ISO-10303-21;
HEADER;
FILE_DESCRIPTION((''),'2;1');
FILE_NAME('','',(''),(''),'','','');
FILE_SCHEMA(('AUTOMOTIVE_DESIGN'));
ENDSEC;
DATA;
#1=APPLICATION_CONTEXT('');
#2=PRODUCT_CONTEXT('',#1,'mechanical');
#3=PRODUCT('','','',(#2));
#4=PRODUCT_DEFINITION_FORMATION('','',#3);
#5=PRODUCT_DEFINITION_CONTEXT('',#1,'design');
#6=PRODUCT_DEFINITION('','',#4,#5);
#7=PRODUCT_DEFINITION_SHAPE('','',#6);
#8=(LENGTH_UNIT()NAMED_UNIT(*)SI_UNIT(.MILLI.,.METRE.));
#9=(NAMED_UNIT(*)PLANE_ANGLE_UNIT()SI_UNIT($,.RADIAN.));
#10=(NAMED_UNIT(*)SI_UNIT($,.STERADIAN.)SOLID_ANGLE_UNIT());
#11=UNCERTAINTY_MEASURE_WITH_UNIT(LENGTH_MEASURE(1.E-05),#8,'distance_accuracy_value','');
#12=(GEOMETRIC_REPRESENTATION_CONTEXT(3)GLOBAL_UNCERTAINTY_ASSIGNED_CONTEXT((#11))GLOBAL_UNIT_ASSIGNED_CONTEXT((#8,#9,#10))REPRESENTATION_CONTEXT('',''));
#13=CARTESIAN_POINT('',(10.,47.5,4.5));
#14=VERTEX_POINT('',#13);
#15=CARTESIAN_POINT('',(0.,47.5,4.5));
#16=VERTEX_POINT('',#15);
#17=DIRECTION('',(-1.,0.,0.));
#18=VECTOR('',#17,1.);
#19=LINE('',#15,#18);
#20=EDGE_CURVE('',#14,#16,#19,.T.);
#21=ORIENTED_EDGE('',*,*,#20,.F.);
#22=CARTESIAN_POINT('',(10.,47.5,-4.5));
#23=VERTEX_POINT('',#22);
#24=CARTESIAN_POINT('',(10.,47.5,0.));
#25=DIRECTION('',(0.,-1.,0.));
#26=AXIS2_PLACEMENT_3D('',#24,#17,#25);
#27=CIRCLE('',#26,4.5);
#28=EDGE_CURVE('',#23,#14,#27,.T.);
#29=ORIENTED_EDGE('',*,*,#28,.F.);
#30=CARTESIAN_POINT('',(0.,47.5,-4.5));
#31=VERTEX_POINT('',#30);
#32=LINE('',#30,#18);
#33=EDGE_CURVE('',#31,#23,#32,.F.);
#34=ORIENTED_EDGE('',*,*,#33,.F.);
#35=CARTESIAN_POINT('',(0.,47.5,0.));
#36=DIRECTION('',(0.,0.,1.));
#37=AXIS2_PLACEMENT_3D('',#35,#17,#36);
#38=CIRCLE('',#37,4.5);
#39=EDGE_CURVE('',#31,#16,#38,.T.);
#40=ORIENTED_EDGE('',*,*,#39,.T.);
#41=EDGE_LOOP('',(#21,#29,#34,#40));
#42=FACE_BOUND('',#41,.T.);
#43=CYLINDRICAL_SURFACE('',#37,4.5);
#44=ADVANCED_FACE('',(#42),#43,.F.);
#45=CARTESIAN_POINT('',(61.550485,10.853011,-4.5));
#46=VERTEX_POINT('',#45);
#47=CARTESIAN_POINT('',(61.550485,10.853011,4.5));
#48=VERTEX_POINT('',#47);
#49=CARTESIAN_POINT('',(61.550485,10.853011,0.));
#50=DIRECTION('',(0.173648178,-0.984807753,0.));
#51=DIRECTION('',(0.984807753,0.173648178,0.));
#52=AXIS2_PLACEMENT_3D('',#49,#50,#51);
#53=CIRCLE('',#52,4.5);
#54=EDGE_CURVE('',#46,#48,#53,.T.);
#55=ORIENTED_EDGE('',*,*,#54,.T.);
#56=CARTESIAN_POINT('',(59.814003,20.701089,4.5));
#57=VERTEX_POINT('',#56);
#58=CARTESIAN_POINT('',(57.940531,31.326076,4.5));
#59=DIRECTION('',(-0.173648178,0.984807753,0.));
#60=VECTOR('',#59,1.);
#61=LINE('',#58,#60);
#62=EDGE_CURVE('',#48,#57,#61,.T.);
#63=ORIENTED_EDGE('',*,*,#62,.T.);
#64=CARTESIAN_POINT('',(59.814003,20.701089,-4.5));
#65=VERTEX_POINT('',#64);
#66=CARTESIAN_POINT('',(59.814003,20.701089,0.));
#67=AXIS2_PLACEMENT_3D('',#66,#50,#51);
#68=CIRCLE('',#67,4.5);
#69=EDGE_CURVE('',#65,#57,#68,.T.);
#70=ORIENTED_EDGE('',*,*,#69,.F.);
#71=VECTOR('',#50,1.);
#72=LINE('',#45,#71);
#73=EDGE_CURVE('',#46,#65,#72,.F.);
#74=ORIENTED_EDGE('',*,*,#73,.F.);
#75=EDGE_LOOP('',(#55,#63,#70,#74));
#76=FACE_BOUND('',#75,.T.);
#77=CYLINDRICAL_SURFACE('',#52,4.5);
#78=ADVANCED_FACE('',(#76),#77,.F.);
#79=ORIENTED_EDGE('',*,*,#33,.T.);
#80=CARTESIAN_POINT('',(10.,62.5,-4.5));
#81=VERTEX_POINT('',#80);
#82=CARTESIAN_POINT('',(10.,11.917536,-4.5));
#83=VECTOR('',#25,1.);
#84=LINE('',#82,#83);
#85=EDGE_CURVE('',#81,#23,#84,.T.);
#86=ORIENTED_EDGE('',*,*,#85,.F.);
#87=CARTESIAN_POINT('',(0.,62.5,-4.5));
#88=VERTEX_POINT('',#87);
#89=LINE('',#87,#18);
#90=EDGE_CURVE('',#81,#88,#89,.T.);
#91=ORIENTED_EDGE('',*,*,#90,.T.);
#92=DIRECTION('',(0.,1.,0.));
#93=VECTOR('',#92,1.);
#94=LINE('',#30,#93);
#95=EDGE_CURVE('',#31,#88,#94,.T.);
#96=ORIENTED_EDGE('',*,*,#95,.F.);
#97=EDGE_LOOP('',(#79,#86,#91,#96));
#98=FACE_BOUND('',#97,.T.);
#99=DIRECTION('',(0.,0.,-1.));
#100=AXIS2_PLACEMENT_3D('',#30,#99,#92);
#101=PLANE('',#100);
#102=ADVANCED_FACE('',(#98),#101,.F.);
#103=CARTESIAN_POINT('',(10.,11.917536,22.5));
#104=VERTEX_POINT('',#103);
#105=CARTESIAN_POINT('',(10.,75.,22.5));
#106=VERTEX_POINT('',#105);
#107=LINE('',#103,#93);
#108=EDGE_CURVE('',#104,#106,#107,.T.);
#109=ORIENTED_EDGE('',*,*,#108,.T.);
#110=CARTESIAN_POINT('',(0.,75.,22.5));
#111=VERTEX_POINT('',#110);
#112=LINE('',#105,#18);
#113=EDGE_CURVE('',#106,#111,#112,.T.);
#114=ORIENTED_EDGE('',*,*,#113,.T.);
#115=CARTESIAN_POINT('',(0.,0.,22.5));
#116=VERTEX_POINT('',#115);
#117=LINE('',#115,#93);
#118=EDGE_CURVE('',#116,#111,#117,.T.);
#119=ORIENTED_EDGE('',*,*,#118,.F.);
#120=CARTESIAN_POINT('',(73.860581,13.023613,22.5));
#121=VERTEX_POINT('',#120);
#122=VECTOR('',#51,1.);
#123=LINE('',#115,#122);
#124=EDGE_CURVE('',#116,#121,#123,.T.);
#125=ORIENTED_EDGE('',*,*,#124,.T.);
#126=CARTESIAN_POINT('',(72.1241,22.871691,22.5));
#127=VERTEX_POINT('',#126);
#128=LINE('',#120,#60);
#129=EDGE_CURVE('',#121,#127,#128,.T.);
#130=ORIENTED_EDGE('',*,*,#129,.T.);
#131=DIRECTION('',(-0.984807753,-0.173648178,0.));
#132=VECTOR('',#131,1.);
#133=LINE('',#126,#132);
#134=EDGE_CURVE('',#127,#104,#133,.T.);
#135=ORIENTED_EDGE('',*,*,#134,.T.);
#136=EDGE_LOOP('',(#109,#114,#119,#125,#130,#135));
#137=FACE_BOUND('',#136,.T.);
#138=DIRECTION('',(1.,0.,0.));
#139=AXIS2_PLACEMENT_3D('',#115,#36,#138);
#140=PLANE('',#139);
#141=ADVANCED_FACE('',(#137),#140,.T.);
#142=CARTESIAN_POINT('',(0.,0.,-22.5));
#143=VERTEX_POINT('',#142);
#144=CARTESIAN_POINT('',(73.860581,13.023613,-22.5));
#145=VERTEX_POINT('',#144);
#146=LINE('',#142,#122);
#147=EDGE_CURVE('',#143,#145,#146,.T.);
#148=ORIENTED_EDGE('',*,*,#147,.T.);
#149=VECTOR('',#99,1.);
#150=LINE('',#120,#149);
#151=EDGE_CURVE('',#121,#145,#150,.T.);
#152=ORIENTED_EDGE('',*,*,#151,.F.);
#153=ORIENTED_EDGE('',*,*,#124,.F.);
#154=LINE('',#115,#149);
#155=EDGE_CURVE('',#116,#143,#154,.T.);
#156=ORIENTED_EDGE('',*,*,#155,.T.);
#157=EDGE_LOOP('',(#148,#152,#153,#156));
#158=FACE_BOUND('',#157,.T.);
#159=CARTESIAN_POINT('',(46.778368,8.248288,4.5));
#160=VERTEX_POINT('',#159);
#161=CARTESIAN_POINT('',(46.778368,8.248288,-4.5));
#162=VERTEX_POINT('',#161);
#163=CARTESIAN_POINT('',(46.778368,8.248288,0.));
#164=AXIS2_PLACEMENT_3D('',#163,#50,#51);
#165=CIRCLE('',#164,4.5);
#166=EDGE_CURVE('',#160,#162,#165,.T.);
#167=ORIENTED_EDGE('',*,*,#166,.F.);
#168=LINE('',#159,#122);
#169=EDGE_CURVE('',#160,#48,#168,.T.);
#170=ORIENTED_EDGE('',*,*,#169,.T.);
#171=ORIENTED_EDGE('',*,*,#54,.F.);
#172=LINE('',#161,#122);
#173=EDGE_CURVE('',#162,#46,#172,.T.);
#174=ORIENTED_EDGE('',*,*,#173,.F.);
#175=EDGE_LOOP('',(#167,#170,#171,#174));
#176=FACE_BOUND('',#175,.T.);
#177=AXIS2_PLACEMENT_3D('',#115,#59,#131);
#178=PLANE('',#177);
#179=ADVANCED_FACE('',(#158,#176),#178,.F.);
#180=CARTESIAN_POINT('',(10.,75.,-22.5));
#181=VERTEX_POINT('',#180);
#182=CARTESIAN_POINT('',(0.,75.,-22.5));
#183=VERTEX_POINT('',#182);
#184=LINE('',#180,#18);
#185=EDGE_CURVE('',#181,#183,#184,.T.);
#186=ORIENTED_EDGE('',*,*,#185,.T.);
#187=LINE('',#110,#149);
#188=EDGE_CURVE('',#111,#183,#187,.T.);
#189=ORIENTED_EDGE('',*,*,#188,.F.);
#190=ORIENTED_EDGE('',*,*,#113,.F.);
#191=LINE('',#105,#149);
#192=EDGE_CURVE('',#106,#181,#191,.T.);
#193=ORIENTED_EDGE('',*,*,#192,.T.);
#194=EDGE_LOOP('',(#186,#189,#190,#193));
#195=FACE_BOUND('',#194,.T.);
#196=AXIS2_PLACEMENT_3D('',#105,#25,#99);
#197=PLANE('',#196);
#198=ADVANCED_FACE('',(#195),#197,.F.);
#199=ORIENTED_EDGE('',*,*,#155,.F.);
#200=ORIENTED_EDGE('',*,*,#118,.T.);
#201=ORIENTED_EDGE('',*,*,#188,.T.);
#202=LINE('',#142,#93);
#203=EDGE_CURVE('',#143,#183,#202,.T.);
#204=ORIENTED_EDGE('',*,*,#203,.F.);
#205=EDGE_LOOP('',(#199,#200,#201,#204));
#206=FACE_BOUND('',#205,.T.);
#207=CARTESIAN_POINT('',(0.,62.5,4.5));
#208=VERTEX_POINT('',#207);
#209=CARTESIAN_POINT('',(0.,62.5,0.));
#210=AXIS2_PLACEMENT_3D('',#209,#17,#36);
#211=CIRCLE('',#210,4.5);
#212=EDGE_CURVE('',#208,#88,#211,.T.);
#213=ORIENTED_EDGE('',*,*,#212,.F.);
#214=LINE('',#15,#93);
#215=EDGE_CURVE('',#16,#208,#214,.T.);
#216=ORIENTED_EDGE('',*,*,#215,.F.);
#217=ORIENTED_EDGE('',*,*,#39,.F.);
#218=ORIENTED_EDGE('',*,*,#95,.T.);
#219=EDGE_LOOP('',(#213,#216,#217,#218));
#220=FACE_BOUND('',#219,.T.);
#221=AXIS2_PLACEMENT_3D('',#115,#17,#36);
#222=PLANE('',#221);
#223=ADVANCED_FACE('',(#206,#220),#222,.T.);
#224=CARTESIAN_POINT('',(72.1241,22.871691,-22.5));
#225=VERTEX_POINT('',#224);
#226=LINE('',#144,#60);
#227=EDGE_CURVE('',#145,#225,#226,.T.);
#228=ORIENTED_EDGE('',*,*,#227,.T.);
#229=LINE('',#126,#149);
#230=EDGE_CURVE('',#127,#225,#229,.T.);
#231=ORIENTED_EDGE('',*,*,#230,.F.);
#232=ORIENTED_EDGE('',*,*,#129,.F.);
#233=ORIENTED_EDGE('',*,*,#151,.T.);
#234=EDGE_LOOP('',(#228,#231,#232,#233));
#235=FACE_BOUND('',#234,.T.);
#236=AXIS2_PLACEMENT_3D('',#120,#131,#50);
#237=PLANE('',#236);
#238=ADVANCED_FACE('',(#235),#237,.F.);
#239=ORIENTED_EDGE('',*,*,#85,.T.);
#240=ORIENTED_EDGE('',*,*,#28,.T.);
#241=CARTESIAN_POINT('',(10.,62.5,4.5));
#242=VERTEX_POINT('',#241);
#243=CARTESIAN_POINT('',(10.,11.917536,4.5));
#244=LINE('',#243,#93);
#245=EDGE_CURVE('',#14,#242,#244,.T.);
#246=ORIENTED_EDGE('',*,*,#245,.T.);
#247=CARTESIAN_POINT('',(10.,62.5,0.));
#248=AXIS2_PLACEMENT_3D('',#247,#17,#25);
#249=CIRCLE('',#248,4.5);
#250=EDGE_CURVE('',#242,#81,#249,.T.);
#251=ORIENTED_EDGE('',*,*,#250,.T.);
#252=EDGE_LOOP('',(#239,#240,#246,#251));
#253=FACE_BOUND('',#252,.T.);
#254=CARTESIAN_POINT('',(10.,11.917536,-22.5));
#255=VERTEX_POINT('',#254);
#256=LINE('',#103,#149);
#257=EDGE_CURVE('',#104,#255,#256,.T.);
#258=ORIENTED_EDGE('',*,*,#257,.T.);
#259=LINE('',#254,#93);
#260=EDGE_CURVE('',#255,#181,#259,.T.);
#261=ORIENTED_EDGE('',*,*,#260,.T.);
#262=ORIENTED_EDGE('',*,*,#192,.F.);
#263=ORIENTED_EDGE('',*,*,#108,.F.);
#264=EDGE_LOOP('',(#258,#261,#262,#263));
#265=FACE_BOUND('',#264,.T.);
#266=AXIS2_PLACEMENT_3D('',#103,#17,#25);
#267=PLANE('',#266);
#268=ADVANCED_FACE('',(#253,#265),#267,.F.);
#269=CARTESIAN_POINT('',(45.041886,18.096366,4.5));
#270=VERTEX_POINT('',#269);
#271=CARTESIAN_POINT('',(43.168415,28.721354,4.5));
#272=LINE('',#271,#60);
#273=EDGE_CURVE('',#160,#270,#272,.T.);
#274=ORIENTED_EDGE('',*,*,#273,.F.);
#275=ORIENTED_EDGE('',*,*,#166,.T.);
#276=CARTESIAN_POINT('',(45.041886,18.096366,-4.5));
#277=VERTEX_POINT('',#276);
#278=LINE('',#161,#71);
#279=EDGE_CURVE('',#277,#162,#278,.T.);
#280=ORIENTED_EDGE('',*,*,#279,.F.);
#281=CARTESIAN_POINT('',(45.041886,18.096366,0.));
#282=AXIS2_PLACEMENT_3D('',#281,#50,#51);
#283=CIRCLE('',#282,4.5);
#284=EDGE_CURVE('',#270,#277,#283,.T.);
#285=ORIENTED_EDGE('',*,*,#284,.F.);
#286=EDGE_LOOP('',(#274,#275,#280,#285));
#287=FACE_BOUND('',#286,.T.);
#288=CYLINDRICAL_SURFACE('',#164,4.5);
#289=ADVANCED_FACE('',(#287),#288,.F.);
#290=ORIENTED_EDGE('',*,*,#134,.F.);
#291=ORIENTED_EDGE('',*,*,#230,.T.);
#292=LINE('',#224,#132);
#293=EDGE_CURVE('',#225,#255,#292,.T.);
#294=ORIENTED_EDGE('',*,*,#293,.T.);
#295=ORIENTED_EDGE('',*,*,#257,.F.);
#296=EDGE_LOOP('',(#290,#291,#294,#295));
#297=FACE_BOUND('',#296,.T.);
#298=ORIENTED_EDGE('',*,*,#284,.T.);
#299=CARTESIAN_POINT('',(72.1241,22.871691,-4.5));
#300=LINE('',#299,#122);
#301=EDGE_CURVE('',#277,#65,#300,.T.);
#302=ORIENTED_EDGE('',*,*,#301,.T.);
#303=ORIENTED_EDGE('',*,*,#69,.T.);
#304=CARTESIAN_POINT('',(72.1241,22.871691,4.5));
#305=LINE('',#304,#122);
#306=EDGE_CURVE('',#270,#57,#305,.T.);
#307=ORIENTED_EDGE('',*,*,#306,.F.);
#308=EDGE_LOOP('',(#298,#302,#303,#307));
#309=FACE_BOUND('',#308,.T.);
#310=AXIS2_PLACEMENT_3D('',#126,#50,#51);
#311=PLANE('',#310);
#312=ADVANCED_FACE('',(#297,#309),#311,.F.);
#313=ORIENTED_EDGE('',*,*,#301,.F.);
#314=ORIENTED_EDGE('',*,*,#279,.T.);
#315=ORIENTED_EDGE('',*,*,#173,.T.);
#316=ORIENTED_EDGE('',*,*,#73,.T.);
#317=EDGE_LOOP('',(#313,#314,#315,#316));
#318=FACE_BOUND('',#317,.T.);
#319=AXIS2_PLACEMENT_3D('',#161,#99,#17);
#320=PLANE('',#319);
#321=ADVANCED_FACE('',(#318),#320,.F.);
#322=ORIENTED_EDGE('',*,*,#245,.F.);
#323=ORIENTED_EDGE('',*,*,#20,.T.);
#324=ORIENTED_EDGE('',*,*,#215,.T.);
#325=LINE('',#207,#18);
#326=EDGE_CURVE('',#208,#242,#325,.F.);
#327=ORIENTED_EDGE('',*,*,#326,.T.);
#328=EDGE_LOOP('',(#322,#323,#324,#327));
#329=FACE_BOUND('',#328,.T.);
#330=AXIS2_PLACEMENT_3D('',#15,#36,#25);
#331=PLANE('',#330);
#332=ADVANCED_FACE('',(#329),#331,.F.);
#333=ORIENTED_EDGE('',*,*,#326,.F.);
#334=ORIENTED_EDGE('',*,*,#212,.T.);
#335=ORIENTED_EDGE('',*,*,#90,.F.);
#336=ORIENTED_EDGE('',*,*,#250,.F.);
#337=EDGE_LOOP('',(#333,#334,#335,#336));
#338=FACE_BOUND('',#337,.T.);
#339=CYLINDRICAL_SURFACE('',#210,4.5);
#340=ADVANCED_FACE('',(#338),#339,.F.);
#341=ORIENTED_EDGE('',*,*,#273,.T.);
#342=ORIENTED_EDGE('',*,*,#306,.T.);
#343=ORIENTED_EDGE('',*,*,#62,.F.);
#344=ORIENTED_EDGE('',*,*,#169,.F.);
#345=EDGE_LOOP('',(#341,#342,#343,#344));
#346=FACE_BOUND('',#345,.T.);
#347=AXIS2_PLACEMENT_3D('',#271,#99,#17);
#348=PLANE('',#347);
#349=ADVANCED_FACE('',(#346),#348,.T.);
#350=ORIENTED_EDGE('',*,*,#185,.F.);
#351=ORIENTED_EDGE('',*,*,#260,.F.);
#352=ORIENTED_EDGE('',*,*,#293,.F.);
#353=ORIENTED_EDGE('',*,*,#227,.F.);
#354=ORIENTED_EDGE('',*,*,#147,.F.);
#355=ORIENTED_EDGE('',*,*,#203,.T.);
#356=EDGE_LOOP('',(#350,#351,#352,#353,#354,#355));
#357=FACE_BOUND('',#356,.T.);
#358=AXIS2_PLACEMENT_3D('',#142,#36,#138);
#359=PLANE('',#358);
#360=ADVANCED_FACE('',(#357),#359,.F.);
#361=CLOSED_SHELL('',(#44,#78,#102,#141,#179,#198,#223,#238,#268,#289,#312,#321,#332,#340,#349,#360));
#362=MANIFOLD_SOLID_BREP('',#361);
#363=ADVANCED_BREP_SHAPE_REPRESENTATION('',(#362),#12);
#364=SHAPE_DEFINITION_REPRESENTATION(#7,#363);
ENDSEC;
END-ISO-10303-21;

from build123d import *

# Parameters (mm, degrees)
BOSS_EXTRUDE1_DEPTH      = 22.5
M8_CLEARANCE_SLOT1_DEPTH = 10


# Read off the part's stored shape, not the designer's step: M8 Clearance Slot1
with BuildPart() as part:
    # Sketch1 → Boss-Extrude1 (new, symmetric)
    with BuildSketch(Plane.XY):
        Polygon((0, 0), (73.860581476, 13.023613325), (72.124099699, 22.871690855), (10, 11.917535926), (10, 75), (0, 75), align=None)
    extrude(amount=BOSS_EXTRUDE1_DEPTH, both=True)

    # M8 Clearance Slot1 outline → M8 Clearance Slot1 (cut)
    with BuildSketch(Plane.YZ):
        with BuildLine():
            ThreePointArc((62.5, -4.5), (67, 0), (62.5, 4.5))
            Line((62.5, 4.5), (47.5, 4.5))
            ThreePointArc((47.5, 4.5), (43, 0), (47.5, -4.5))
            Line((47.5, -4.5), (62.5, -4.5))
        make_face()
    m8_clearance_slot1 = extrude(amount=M8_CLEARANCE_SLOT1_DEPTH, mode=Mode.SUBTRACT)

    # Mirror1: M8 Clearance Slot1 across plane
    add(m8_clearance_slot1.mirror(Plane(origin=(0, 0, 0), x_dir=(0, 0, 1), z_dir=(0.7660444431189772, -0.6427876096865405, 0))), mode=Mode.SUBTRACT)


solid = part.part
